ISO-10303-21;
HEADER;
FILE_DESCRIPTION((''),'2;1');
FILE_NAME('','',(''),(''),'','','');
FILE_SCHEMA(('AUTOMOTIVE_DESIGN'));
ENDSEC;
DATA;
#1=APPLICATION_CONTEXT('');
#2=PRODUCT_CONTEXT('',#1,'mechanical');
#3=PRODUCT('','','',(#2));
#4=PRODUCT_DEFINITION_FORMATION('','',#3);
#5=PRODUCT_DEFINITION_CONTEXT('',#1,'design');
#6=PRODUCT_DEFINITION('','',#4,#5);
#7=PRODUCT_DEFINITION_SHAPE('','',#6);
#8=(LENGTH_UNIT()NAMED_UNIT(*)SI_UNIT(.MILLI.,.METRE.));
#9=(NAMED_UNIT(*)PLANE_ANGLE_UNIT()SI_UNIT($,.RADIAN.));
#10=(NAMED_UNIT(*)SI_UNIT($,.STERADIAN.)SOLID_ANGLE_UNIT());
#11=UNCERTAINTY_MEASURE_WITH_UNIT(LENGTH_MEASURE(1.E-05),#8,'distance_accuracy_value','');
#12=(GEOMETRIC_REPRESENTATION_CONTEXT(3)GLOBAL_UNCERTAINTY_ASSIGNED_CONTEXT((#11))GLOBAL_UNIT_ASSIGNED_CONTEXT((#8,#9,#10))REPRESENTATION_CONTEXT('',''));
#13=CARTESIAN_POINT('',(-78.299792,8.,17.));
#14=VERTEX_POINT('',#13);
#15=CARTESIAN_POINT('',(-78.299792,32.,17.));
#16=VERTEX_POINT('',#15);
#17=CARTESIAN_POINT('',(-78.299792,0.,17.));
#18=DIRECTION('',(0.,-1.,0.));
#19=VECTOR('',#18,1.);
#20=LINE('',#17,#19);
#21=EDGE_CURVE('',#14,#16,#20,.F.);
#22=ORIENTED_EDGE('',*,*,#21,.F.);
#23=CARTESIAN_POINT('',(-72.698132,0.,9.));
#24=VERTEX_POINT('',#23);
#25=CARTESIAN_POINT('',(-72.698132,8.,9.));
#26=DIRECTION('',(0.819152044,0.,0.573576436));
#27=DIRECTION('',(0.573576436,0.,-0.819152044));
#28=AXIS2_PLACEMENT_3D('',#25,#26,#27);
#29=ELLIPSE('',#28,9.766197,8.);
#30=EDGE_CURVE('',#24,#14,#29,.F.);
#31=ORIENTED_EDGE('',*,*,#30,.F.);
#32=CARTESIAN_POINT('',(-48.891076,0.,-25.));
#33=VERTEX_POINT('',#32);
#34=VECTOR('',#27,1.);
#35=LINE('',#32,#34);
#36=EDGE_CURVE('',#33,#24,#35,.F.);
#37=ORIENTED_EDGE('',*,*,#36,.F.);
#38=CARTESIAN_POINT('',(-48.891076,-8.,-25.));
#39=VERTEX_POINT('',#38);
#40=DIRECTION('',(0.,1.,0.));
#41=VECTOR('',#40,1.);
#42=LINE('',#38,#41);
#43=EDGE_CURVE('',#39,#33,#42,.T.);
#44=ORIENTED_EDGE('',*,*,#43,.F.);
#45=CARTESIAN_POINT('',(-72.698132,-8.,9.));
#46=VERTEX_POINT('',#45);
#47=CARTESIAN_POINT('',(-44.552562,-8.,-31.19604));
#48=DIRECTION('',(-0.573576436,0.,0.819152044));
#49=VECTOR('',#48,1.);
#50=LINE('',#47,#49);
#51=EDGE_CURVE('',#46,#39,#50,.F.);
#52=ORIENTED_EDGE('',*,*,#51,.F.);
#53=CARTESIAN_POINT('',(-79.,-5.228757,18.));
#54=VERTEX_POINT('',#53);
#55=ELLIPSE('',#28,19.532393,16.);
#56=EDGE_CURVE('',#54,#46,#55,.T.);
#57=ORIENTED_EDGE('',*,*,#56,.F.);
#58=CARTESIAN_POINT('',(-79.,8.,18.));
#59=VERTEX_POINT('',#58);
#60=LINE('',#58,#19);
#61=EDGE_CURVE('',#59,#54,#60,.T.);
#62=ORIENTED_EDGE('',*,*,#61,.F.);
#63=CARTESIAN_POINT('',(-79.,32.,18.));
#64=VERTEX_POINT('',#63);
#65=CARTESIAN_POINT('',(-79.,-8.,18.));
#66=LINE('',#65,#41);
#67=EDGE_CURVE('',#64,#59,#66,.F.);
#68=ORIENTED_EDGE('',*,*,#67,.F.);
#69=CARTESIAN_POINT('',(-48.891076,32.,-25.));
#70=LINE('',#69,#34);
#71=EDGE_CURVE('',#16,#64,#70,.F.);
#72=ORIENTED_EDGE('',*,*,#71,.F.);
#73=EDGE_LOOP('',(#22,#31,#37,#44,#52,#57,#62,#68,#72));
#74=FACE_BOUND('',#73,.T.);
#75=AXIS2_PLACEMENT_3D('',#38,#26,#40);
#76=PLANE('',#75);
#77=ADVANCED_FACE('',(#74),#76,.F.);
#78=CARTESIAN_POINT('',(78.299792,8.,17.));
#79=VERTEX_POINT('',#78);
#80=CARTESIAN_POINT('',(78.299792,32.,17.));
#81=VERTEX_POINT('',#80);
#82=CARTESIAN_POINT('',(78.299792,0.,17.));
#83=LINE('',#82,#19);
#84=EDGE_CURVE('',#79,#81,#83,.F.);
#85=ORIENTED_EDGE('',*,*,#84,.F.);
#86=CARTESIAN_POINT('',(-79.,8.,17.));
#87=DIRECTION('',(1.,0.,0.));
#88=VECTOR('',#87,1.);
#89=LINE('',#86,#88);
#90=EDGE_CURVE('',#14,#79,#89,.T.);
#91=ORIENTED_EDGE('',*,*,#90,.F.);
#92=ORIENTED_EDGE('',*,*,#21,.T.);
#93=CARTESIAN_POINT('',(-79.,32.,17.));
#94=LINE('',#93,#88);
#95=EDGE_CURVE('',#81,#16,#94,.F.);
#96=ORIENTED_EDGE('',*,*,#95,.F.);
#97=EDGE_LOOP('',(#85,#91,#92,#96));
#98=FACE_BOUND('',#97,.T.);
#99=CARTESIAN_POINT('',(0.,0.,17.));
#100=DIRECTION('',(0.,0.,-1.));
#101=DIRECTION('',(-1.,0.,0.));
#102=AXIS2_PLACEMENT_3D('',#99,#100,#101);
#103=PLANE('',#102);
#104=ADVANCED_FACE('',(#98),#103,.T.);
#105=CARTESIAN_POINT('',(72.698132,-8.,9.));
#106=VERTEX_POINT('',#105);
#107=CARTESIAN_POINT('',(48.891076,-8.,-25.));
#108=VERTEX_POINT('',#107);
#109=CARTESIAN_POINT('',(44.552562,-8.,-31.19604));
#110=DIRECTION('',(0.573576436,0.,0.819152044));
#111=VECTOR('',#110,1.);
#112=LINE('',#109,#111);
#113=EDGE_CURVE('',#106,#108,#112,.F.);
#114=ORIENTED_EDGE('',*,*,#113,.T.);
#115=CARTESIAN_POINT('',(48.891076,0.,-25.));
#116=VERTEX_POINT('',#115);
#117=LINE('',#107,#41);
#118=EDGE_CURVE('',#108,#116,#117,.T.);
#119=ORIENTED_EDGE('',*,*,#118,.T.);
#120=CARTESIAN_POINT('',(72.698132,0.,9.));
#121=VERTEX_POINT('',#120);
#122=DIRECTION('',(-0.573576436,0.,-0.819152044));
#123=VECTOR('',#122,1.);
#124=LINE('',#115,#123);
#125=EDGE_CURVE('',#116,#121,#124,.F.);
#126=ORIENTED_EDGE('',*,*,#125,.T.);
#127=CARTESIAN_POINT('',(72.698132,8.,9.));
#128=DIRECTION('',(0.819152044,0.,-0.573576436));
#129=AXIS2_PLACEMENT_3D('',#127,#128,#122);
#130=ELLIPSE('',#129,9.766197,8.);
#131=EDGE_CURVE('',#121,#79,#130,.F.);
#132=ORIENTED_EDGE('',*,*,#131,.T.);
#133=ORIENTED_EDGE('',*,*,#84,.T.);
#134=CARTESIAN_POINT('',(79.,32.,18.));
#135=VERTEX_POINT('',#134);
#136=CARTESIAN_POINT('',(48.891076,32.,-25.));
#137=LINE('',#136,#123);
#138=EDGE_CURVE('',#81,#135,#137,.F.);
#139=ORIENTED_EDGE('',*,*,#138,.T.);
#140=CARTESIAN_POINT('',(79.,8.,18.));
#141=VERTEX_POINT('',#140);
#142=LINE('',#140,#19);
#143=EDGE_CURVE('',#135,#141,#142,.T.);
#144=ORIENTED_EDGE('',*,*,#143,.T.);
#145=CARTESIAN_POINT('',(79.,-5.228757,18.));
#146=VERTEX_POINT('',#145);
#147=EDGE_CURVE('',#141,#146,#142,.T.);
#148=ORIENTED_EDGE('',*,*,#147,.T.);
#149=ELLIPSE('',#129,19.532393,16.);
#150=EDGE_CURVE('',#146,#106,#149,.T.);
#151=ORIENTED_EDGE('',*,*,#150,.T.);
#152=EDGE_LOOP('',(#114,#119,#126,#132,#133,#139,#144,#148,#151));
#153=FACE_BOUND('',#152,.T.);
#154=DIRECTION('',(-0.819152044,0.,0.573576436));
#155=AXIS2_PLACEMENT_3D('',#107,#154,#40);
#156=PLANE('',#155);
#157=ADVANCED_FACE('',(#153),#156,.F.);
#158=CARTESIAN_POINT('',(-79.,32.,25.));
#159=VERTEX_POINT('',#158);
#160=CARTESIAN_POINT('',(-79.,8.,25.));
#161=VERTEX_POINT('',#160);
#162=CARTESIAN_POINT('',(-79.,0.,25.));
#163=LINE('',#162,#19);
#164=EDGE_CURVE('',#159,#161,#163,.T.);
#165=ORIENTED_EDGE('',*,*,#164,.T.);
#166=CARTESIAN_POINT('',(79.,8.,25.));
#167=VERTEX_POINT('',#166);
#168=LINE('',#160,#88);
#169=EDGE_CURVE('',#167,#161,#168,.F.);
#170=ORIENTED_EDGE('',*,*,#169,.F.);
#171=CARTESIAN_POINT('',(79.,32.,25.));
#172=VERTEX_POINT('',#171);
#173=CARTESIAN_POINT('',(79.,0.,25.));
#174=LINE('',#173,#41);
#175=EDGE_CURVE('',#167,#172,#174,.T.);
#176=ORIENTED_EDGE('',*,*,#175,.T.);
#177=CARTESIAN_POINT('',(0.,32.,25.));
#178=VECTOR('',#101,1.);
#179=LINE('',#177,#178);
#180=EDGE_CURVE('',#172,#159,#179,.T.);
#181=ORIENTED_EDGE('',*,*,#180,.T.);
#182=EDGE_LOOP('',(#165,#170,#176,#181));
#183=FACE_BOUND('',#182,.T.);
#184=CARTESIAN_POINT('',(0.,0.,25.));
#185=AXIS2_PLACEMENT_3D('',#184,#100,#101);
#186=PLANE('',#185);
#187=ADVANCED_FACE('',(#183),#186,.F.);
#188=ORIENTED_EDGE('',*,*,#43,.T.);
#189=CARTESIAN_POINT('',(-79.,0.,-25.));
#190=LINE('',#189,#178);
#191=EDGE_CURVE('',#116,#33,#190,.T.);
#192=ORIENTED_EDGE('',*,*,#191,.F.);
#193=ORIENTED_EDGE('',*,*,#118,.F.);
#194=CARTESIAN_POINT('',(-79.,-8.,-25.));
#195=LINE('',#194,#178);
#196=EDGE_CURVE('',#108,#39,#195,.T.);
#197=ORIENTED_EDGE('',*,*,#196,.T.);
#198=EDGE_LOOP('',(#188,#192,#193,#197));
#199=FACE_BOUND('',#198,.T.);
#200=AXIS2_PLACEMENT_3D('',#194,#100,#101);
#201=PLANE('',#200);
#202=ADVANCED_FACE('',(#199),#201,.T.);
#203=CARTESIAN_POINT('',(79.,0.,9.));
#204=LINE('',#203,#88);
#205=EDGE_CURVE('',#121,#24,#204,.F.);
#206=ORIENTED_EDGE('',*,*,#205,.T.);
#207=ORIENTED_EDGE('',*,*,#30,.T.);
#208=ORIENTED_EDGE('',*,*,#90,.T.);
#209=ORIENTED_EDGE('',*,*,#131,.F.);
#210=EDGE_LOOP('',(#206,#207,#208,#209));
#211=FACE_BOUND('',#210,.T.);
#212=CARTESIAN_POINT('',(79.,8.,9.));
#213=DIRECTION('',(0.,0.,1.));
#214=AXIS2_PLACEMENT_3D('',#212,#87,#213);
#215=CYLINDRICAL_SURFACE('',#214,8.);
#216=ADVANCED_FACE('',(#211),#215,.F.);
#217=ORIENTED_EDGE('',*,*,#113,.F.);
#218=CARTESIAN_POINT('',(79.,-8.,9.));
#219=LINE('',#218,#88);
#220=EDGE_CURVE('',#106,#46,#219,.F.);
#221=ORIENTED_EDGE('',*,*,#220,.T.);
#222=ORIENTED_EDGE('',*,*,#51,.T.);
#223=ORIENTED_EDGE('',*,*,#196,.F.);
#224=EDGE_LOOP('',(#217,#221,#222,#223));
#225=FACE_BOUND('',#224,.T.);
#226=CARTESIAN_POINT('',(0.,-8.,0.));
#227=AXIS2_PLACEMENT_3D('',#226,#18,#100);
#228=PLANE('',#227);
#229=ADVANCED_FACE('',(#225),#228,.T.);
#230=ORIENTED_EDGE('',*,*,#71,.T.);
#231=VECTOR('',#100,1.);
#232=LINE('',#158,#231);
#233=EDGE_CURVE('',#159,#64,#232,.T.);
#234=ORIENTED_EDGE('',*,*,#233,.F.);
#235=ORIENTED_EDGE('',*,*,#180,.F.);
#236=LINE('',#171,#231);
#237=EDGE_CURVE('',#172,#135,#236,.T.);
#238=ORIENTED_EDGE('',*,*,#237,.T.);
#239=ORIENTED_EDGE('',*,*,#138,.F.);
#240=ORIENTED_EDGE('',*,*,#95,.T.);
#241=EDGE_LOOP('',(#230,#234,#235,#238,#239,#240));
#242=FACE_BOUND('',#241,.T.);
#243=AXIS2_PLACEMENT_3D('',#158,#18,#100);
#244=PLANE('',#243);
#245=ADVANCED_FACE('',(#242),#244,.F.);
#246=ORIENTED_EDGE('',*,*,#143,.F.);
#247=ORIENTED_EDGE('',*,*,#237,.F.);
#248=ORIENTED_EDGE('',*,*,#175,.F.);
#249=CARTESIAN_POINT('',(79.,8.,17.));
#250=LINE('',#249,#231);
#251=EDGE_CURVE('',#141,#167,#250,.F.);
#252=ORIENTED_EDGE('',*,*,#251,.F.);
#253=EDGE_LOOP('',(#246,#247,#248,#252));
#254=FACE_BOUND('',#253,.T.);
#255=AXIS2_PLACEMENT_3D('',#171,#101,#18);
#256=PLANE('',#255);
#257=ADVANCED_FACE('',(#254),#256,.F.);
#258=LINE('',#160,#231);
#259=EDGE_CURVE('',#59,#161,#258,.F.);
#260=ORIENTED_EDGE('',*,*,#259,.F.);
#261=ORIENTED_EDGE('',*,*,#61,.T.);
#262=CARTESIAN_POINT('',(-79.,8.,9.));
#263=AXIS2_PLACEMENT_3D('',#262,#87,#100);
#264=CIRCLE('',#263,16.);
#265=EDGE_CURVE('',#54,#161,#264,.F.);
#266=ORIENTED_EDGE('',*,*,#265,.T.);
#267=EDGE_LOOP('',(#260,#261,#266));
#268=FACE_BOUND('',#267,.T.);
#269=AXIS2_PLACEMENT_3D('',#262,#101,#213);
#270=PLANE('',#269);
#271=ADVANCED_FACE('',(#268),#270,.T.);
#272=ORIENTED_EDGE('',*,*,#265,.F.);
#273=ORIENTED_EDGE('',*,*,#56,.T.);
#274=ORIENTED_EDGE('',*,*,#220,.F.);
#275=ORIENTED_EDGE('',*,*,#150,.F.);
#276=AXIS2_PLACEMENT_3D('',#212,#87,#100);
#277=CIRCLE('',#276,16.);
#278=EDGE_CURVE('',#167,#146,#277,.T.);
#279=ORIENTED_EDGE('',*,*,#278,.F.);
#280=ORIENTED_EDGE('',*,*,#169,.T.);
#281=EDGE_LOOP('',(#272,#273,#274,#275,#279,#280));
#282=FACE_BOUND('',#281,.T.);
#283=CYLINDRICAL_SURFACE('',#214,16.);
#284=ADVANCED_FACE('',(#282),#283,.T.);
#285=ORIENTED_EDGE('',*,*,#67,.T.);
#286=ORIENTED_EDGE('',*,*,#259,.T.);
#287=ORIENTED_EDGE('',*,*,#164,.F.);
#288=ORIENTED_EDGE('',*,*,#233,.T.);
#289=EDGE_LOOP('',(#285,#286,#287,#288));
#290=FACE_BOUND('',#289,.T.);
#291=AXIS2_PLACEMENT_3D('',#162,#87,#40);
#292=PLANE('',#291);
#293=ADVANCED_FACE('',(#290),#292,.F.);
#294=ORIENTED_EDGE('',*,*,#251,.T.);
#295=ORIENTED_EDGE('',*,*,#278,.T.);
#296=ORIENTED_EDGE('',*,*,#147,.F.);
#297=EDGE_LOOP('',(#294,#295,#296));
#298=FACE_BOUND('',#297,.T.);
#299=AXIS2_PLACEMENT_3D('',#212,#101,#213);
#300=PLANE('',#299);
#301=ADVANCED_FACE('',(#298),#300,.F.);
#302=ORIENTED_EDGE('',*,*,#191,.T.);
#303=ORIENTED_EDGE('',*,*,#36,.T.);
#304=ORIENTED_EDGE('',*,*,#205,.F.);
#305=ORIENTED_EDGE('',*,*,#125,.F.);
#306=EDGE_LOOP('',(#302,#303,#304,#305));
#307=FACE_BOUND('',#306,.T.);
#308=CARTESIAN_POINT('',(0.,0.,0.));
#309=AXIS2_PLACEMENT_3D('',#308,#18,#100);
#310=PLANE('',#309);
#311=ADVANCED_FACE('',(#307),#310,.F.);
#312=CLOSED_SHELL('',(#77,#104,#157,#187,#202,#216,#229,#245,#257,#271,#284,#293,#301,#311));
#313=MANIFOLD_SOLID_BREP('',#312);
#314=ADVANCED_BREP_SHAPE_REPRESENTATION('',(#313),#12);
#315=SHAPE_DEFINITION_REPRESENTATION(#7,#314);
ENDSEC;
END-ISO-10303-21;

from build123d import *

# Parameters (mm, degrees)
SKETCH1_W                    = 158
SKETCH1_H                    = 50
BASE_FLANGE1_DEPTH           = 8
EDGE_FLANGE1_STRIP_W         = 48
EDGE_FLANGE1_STRIP_H         = 8
EDGE_FLANGE1_STRIP_CUT_DEPTH = 158
EDGE_FLANGE1_DEPTH           = 158
CHAMFER1_SIZE                = 43
CHAMFER1_SIZE2               = 30.108924143
MIRROR2_START                = 54.388635645
MIRROR2_OUTLINE_W            = 56
MIRROR2_OUTLINE_H            = 41
MIRROR2_DEPTH                = 24.663786763


# Read off the part's stored shape, not the designer's step: Mirror2
# Sheet-metal steps are written as plain solids
with BuildPart() as part:
    # Sketch1 → Base-Flange1 (new body)
    with BuildSketch(Plane(origin=(0, 0, 0), x_dir=(1, 0, 0), z_dir=(0, 1, 0))):
        Rectangle(SKETCH1_W, SKETCH1_H)
    extrude(amount=-BASE_FLANGE1_DEPTH)

    # Edge-Flange1 strip (across the edge) → Edge-Flange1 strip cut (cut)
    with BuildSketch(Plane(origin=(-79, 0, 25), x_dir=(0, 0, -1), z_dir=(1, 0, 0))):
        with Locations((-8, -4)):
            Rectangle(EDGE_FLANGE1_STRIP_W, EDGE_FLANGE1_STRIP_H)
    extrude(amount=EDGE_FLANGE1_STRIP_CUT_DEPTH, mode=Mode.SUBTRACT)

    # Edge-Flange1 section (across the edge) → Edge-Flange1 (add)
    with BuildSketch(Plane(origin=(-79, 0, 25), x_dir=(0, 0, -1), z_dir=(1, 0, 0))):
        with BuildLine():
            Line((0, 8), (0, 32))
            Line((0, 32), (8, 32))
            Line((8, 32), (8, 8))
            ThreePointArc((8, 8), (10.343145751, 2.343145751), (16, 0))
            Line((16, 0), (16, -8))
            ThreePointArc((16, -8), (4.686291501, -3.313708499), (0, 8))
        make_face()
    extrude(amount=EDGE_FLANGE1_DEPTH)

    # Chamfer1
    chamfer1_edges = [part.edges().sort_by_distance(p)[0] for p in [
        (-79, -4, -25),
    ]]
    chamfer1_side = [part.faces().sort_by_distance(p)[0] for p in [
        (-79, -0.640312424, -8),
    ]]
    chamfer(chamfer1_edges, length=CHAMFER1_SIZE, length2=CHAMFER1_SIZE2, reference=chamfer1_side[0])

    # Mirror2 outline → Mirror2 (cut)
    with BuildSketch(Plane(origin=(0, 0, 0), x_dir=(0.5735764363510512, 0, 0.8191520442889882), z_dir=(0.8191520442889882, 0, -0.5735764363510512)).offset(MIRROR2_START)):
        with Locations((34, -12.5)):
            Rectangle(MIRROR2_OUTLINE_W, MIRROR2_OUTLINE_H)
    extrude(amount=MIRROR2_DEPTH, mode=Mode.SUBTRACT)


solid = part.part
